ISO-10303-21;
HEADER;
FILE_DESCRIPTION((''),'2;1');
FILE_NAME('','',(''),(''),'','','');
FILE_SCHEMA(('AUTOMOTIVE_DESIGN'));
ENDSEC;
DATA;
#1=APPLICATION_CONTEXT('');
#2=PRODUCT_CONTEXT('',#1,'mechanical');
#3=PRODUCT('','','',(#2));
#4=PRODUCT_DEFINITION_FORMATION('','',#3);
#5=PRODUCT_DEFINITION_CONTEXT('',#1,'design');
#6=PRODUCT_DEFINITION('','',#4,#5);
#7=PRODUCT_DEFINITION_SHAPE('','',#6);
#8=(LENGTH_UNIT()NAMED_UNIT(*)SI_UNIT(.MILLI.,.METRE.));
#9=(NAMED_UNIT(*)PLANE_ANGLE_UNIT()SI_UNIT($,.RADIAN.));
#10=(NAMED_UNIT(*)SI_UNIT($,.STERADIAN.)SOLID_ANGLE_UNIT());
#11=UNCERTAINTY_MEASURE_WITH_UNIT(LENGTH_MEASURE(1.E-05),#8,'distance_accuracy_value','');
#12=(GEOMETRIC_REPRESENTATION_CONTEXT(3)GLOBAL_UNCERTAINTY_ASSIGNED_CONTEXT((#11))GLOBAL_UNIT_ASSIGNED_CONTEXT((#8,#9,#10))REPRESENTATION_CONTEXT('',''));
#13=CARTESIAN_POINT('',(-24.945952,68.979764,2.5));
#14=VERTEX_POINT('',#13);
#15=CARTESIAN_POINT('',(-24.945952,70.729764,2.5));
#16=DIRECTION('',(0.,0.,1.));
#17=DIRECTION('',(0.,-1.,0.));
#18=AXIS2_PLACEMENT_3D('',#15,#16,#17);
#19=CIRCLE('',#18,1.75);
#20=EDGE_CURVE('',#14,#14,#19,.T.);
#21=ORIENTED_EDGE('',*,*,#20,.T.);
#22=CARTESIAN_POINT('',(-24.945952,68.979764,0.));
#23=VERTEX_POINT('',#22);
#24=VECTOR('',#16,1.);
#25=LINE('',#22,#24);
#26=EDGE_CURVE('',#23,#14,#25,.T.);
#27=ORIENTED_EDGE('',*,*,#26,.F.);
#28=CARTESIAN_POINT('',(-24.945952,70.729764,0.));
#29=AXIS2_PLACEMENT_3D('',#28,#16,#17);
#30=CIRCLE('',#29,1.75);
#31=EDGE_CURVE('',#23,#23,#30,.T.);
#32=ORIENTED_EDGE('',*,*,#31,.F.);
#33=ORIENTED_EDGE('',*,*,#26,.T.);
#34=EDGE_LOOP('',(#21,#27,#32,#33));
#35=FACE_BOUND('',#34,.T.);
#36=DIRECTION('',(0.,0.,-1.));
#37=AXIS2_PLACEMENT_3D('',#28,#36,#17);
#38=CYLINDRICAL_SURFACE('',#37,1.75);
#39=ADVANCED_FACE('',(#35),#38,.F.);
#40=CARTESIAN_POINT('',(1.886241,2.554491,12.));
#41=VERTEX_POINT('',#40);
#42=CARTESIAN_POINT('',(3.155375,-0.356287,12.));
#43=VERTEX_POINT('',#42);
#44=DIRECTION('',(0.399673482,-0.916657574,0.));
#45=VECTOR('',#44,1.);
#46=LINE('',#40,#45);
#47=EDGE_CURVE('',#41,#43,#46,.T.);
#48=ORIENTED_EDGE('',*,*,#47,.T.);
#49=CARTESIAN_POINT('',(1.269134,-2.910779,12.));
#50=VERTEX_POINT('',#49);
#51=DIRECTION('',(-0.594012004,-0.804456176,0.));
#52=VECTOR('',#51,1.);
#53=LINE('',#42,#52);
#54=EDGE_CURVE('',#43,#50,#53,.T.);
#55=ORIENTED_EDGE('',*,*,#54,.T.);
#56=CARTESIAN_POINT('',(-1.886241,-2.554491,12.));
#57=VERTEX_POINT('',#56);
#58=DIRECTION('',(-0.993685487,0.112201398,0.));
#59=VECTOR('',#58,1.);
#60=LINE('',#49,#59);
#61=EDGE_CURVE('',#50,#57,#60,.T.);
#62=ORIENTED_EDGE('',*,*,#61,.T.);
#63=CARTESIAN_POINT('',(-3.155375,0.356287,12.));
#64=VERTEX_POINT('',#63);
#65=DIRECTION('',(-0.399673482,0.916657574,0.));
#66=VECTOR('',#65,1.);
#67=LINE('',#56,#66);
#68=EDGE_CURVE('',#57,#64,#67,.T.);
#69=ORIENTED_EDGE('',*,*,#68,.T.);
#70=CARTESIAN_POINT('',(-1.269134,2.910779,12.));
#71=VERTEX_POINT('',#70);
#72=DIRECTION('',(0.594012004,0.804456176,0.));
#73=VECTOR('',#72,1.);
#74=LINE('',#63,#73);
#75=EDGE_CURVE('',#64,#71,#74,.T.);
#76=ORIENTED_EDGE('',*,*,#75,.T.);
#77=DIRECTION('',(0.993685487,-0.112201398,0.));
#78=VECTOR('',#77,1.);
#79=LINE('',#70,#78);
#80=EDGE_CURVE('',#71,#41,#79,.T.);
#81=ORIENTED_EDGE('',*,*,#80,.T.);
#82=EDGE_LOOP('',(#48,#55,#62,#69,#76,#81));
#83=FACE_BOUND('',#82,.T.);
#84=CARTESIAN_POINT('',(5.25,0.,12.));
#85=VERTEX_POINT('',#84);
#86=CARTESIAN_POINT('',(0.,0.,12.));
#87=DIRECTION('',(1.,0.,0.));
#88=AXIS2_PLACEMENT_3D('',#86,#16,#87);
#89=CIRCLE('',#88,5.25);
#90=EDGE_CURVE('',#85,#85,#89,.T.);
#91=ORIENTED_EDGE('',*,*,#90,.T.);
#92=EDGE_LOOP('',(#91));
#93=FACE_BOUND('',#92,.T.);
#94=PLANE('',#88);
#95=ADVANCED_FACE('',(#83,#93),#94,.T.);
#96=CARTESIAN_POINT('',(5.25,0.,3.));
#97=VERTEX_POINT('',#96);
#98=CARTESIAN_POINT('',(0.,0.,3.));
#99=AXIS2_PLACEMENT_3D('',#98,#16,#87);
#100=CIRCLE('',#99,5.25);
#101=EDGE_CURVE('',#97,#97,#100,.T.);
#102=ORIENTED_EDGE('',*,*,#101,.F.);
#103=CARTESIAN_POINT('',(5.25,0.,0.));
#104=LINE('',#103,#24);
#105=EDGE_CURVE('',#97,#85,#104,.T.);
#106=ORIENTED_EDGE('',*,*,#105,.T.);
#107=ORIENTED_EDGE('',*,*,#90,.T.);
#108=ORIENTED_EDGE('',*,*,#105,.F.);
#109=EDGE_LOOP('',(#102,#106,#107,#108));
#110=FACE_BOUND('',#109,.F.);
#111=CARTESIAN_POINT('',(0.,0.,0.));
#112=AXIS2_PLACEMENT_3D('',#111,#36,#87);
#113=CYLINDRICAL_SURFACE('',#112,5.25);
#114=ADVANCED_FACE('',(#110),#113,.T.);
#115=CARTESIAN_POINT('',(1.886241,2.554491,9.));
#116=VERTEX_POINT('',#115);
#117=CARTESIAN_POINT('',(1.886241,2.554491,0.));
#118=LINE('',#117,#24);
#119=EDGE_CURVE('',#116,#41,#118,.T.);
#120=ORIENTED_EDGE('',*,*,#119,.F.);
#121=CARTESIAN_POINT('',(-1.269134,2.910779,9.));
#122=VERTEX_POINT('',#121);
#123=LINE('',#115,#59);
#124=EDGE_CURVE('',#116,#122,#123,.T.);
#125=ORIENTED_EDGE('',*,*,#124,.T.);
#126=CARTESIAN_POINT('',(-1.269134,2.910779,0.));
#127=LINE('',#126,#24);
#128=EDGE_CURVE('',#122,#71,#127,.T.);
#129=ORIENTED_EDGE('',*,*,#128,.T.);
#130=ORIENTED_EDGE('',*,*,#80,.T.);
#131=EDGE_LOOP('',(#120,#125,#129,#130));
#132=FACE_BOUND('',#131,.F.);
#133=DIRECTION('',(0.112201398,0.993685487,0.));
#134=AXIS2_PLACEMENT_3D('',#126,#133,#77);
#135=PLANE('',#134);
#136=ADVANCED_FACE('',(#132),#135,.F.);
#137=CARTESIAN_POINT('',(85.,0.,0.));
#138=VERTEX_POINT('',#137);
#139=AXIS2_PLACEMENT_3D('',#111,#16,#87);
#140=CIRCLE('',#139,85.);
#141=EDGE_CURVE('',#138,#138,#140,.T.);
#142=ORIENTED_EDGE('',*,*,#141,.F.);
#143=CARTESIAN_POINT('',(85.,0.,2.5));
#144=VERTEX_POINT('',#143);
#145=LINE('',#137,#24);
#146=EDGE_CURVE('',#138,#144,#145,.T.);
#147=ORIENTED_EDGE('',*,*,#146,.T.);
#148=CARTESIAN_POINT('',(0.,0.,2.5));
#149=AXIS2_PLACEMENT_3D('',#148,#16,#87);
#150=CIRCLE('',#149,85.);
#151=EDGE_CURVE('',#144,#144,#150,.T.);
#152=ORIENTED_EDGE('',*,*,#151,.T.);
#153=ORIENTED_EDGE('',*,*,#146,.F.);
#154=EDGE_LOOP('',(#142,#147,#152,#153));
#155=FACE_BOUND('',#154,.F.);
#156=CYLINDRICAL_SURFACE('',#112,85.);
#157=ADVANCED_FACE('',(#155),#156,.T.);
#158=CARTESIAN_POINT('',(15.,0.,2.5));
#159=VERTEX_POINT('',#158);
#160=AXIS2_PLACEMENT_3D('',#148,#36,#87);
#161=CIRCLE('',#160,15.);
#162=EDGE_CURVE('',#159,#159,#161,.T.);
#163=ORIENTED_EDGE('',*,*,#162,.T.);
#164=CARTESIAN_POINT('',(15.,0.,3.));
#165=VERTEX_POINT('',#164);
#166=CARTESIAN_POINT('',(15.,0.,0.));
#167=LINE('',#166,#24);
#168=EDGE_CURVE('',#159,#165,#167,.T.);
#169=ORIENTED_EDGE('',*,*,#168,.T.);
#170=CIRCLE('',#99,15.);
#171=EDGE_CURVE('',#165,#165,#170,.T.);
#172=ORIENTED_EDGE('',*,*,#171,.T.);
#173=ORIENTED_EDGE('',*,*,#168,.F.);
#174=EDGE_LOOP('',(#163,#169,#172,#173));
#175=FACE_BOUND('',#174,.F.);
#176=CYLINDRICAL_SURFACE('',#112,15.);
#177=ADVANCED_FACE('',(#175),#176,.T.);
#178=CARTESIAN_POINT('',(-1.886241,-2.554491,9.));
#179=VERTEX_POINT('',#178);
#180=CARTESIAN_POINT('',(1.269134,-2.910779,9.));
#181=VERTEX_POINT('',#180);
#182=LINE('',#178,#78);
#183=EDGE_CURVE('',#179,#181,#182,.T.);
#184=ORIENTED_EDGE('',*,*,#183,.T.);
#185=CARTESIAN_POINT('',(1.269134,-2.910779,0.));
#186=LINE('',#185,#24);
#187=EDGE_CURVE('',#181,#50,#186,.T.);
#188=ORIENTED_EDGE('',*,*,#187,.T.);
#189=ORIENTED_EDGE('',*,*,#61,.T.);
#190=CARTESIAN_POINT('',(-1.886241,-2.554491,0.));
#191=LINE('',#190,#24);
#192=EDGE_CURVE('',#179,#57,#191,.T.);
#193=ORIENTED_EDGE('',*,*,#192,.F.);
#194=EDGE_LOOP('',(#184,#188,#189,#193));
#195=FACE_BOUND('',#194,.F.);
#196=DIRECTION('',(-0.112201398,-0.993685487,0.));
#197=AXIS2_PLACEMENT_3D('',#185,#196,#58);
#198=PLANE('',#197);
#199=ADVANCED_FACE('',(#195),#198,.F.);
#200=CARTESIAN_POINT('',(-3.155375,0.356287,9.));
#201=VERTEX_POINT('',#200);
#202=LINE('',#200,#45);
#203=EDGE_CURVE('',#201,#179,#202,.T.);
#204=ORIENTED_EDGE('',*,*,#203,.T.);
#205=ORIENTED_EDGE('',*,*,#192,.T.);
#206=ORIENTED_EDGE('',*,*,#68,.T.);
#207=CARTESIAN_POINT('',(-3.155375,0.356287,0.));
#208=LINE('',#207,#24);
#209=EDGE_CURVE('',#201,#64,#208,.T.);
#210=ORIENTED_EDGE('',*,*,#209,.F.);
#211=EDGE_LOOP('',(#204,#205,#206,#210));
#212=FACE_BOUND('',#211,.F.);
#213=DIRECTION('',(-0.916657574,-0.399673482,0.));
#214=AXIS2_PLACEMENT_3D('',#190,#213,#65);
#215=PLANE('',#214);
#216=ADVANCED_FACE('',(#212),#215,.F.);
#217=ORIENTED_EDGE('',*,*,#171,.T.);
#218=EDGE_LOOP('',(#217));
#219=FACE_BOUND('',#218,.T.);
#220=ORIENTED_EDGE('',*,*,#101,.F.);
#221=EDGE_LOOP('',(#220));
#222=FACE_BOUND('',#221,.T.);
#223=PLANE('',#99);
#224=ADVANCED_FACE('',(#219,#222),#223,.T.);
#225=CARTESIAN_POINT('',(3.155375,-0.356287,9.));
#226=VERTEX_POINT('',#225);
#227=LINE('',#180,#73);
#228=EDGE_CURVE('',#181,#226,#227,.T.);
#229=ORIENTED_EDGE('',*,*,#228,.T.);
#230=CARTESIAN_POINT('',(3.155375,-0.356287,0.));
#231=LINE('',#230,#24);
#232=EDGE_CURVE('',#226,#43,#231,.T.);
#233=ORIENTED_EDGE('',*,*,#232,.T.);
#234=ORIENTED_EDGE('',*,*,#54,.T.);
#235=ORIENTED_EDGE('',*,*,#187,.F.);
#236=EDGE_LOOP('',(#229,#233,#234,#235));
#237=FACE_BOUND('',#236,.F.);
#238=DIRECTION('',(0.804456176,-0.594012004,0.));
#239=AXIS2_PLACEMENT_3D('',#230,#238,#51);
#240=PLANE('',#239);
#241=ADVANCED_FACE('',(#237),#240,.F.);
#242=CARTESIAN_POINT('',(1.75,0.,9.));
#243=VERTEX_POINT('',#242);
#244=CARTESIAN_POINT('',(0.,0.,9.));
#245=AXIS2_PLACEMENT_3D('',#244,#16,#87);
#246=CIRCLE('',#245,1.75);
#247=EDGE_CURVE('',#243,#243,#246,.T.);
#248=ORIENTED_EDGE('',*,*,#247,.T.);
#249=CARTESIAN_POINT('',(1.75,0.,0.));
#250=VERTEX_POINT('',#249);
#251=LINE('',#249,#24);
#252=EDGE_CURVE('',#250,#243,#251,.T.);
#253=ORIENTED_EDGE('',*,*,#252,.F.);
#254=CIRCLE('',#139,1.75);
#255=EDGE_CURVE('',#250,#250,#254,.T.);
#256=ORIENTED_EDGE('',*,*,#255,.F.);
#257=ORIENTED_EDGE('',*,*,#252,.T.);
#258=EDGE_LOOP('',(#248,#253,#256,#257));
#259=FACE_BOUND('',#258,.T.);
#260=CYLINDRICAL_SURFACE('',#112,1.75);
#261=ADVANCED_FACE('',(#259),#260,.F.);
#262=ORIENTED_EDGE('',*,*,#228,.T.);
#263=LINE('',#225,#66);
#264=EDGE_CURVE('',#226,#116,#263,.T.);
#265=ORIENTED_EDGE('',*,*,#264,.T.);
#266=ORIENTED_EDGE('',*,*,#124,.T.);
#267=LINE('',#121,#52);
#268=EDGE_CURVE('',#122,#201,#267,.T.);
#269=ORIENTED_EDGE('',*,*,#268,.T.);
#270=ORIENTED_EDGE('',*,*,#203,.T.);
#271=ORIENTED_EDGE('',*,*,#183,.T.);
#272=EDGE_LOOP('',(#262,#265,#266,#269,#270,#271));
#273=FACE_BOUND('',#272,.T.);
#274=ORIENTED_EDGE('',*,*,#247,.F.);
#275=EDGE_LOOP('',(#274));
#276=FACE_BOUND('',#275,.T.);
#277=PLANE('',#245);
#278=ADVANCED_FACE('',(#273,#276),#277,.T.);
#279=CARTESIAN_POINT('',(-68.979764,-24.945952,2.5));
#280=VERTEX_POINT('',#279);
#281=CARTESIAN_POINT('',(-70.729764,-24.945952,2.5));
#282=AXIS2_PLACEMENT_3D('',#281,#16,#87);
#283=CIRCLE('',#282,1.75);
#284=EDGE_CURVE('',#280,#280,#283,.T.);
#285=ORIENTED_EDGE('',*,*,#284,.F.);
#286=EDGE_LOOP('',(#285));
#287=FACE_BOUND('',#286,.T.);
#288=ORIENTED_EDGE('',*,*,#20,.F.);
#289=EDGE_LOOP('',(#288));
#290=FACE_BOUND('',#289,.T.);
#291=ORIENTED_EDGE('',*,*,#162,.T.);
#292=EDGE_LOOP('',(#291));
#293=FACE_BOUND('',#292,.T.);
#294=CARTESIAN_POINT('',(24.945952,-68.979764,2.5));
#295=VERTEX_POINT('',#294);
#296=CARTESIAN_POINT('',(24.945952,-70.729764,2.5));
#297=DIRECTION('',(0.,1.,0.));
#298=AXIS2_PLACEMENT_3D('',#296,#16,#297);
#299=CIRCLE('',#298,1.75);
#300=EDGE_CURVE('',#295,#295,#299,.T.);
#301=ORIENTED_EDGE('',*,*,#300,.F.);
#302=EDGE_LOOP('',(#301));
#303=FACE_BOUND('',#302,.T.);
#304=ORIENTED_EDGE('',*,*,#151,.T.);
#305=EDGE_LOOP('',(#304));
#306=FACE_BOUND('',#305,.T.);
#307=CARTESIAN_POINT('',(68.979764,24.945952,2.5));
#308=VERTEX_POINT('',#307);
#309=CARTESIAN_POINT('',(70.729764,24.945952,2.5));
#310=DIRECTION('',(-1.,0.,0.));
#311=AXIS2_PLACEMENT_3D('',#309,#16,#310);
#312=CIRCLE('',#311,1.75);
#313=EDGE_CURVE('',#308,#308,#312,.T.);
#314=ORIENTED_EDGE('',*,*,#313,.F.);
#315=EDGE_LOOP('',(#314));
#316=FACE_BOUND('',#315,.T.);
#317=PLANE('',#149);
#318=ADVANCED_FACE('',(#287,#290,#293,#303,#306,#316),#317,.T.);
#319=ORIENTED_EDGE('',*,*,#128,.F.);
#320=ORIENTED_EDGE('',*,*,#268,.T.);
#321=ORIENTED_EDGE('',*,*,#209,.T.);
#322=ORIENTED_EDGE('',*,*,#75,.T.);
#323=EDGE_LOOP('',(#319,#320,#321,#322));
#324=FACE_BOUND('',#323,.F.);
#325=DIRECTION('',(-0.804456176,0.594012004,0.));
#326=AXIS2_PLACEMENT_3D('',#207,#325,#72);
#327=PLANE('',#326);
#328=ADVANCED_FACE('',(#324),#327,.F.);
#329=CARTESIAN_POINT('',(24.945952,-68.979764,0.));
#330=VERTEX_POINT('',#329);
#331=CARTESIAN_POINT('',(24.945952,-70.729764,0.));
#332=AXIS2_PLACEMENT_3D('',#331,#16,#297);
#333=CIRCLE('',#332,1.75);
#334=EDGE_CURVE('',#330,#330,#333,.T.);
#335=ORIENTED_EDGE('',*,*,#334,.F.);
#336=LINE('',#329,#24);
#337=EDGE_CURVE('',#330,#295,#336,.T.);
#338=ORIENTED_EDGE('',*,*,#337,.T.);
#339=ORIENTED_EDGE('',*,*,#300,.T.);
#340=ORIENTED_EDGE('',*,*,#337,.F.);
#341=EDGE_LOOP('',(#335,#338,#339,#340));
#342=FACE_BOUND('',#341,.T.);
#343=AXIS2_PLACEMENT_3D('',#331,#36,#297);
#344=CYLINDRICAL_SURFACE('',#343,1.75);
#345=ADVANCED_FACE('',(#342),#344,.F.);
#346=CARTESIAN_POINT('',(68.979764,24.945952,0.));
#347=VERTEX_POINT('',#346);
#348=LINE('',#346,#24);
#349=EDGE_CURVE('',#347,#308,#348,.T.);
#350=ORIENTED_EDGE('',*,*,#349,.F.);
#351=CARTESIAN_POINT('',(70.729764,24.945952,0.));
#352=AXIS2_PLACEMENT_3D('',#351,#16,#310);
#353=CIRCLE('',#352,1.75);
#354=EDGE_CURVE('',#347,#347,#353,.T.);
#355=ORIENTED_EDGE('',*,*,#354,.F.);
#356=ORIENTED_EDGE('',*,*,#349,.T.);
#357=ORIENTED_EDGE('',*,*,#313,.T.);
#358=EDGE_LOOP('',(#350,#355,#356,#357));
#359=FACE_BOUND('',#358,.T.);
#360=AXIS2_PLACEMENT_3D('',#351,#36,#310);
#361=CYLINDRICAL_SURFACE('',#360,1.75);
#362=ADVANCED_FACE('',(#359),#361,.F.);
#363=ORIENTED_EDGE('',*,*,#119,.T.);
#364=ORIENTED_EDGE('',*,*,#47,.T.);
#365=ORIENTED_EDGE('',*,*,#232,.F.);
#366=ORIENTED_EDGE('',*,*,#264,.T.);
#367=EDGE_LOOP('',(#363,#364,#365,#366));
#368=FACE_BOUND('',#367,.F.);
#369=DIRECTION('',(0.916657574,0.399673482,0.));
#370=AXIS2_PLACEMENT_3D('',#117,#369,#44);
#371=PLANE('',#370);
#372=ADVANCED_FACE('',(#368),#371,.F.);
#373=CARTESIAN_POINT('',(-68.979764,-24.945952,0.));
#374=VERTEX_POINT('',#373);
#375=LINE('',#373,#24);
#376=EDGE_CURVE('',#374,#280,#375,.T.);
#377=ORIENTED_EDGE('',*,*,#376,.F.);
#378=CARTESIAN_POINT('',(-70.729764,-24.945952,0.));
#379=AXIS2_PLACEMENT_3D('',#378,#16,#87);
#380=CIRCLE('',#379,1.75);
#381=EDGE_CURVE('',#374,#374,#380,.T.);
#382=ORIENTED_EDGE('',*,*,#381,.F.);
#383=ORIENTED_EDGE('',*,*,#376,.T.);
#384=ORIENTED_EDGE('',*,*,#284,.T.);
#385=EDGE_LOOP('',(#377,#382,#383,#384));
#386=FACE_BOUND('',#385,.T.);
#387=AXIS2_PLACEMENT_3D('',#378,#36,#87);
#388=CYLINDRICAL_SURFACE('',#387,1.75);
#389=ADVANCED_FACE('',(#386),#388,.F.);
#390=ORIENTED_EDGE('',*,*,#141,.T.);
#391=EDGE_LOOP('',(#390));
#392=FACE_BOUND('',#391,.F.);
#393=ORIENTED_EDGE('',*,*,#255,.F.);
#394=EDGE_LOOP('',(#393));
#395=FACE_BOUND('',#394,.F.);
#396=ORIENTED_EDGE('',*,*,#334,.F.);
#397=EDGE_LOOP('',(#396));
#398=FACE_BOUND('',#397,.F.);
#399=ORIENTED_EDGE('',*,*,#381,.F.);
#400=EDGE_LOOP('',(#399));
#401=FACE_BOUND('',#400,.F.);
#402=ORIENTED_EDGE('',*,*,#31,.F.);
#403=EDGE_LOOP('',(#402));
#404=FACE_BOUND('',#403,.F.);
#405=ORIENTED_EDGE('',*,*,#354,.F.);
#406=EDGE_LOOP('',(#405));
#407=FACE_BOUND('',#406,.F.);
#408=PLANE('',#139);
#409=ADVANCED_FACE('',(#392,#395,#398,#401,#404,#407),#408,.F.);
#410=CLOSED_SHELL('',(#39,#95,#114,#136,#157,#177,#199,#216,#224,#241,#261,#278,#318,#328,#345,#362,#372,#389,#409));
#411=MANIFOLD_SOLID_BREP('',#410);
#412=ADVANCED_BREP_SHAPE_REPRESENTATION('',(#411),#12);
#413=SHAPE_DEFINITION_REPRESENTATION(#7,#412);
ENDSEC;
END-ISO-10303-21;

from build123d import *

# Parameters (mm, degrees)
F0_R            = 85
F0_R_2          = 1.75
F0_R_3          = 15
F0_R_4          = 5.25
F1_DEPTH        = 2.5
F2_DEPTH        = 2.5
F2_COPIES_COUNT = 4
F3_DEPTH        = 12
F4_DEPTH        = 9
F5_DEPTH        = 3


# Not quite as in the source:
# - a pattern or mirror of a feature is missing from the dataset's text; its kind, count and spacing are read off the source's solid


with BuildPart() as f1:
    # F0 (on Top) → F1 (new body)
    with BuildSketch(Plane.XY):
        Circle(F0_R)
        with Locations((-70.7297637461, -24.9459519848)):
            Circle(F0_R_2, mode=Mode.SUBTRACT)
        Circle(F0_R_3, mode=Mode.SUBTRACT)
        Circle(F0_R_3)
        Circle(F0_R_4, mode=Mode.SUBTRACT)
        Circle(F0_R_4)
        Polygon((-1.2691337593, 2.9107787333), (1.8862414482, 2.554491443), (3.1553752075, -0.3562872903), (1.2691337593, -2.9107787333), (-1.8862414482, -2.554491443), (-3.1553752075, 0.3562872903), align=None, mode=Mode.SUBTRACT)
        Polygon((3.1553752075, -0.3562872903), (1.8862414482, 2.554491443), (-1.2691337593, 2.9107787333), (-3.1553752075, 0.3562872903), (-1.8862414482, -2.554491443), (1.2691337593, -2.9107787333), align=None)
        Circle(F0_R_2, mode=Mode.SUBTRACT)
        with Locations((-70.7297637461, -24.9459519848)):
            Circle(F0_R_2)
    extrude(amount=F1_DEPTH)

    # F0 (on Top) → F2 (cut, through all)
    with BuildSketch(Plane.XY):
        with Locations((-70.7297637461, -24.9459519848)):
            Circle(F0_R_2)
    f2 = extrude(amount=F2_DEPTH, mode=Mode.SUBTRACT)

    # F2_copies: F2 ×4 about axis
    f2_copies_axis = Axis((0, 0, 0), (0, 0, 1))
    for i in range(1, F2_COPIES_COUNT):
        add(f2.rotate(f2_copies_axis, i * 360 / F2_COPIES_COUNT), mode=Mode.SUBTRACT)

    # F0 (on Top) → F3 (join)
    with BuildSketch(Plane.XY):
        Circle(F0_R_4)
        Polygon((-1.2691337593, 2.9107787333), (1.8862414482, 2.554491443), (3.1553752075, -0.3562872903), (1.2691337593, -2.9107787333), (-1.8862414482, -2.554491443), (-3.1553752075, 0.3562872903), align=None, mode=Mode.SUBTRACT)
    extrude(amount=F3_DEPTH)

    # F0 (on Top) → F4 (join)
    with BuildSketch(Plane.XY):
        Polygon((3.1553752075, -0.3562872903), (1.8862414482, 2.554491443), (-1.2691337593, 2.9107787333), (-3.1553752075, 0.3562872903), (-1.8862414482, -2.554491443), (1.2691337593, -2.9107787333), align=None)
        Circle(F0_R_2, mode=Mode.SUBTRACT)
    extrude(amount=F4_DEPTH)

    # F0 (on Top) → F5 (join)
    with BuildSketch(Plane.XY):
        Circle(F0_R_3)
        Circle(F0_R_4, mode=Mode.SUBTRACT)
    extrude(amount=F5_DEPTH)


solid = f1.part
